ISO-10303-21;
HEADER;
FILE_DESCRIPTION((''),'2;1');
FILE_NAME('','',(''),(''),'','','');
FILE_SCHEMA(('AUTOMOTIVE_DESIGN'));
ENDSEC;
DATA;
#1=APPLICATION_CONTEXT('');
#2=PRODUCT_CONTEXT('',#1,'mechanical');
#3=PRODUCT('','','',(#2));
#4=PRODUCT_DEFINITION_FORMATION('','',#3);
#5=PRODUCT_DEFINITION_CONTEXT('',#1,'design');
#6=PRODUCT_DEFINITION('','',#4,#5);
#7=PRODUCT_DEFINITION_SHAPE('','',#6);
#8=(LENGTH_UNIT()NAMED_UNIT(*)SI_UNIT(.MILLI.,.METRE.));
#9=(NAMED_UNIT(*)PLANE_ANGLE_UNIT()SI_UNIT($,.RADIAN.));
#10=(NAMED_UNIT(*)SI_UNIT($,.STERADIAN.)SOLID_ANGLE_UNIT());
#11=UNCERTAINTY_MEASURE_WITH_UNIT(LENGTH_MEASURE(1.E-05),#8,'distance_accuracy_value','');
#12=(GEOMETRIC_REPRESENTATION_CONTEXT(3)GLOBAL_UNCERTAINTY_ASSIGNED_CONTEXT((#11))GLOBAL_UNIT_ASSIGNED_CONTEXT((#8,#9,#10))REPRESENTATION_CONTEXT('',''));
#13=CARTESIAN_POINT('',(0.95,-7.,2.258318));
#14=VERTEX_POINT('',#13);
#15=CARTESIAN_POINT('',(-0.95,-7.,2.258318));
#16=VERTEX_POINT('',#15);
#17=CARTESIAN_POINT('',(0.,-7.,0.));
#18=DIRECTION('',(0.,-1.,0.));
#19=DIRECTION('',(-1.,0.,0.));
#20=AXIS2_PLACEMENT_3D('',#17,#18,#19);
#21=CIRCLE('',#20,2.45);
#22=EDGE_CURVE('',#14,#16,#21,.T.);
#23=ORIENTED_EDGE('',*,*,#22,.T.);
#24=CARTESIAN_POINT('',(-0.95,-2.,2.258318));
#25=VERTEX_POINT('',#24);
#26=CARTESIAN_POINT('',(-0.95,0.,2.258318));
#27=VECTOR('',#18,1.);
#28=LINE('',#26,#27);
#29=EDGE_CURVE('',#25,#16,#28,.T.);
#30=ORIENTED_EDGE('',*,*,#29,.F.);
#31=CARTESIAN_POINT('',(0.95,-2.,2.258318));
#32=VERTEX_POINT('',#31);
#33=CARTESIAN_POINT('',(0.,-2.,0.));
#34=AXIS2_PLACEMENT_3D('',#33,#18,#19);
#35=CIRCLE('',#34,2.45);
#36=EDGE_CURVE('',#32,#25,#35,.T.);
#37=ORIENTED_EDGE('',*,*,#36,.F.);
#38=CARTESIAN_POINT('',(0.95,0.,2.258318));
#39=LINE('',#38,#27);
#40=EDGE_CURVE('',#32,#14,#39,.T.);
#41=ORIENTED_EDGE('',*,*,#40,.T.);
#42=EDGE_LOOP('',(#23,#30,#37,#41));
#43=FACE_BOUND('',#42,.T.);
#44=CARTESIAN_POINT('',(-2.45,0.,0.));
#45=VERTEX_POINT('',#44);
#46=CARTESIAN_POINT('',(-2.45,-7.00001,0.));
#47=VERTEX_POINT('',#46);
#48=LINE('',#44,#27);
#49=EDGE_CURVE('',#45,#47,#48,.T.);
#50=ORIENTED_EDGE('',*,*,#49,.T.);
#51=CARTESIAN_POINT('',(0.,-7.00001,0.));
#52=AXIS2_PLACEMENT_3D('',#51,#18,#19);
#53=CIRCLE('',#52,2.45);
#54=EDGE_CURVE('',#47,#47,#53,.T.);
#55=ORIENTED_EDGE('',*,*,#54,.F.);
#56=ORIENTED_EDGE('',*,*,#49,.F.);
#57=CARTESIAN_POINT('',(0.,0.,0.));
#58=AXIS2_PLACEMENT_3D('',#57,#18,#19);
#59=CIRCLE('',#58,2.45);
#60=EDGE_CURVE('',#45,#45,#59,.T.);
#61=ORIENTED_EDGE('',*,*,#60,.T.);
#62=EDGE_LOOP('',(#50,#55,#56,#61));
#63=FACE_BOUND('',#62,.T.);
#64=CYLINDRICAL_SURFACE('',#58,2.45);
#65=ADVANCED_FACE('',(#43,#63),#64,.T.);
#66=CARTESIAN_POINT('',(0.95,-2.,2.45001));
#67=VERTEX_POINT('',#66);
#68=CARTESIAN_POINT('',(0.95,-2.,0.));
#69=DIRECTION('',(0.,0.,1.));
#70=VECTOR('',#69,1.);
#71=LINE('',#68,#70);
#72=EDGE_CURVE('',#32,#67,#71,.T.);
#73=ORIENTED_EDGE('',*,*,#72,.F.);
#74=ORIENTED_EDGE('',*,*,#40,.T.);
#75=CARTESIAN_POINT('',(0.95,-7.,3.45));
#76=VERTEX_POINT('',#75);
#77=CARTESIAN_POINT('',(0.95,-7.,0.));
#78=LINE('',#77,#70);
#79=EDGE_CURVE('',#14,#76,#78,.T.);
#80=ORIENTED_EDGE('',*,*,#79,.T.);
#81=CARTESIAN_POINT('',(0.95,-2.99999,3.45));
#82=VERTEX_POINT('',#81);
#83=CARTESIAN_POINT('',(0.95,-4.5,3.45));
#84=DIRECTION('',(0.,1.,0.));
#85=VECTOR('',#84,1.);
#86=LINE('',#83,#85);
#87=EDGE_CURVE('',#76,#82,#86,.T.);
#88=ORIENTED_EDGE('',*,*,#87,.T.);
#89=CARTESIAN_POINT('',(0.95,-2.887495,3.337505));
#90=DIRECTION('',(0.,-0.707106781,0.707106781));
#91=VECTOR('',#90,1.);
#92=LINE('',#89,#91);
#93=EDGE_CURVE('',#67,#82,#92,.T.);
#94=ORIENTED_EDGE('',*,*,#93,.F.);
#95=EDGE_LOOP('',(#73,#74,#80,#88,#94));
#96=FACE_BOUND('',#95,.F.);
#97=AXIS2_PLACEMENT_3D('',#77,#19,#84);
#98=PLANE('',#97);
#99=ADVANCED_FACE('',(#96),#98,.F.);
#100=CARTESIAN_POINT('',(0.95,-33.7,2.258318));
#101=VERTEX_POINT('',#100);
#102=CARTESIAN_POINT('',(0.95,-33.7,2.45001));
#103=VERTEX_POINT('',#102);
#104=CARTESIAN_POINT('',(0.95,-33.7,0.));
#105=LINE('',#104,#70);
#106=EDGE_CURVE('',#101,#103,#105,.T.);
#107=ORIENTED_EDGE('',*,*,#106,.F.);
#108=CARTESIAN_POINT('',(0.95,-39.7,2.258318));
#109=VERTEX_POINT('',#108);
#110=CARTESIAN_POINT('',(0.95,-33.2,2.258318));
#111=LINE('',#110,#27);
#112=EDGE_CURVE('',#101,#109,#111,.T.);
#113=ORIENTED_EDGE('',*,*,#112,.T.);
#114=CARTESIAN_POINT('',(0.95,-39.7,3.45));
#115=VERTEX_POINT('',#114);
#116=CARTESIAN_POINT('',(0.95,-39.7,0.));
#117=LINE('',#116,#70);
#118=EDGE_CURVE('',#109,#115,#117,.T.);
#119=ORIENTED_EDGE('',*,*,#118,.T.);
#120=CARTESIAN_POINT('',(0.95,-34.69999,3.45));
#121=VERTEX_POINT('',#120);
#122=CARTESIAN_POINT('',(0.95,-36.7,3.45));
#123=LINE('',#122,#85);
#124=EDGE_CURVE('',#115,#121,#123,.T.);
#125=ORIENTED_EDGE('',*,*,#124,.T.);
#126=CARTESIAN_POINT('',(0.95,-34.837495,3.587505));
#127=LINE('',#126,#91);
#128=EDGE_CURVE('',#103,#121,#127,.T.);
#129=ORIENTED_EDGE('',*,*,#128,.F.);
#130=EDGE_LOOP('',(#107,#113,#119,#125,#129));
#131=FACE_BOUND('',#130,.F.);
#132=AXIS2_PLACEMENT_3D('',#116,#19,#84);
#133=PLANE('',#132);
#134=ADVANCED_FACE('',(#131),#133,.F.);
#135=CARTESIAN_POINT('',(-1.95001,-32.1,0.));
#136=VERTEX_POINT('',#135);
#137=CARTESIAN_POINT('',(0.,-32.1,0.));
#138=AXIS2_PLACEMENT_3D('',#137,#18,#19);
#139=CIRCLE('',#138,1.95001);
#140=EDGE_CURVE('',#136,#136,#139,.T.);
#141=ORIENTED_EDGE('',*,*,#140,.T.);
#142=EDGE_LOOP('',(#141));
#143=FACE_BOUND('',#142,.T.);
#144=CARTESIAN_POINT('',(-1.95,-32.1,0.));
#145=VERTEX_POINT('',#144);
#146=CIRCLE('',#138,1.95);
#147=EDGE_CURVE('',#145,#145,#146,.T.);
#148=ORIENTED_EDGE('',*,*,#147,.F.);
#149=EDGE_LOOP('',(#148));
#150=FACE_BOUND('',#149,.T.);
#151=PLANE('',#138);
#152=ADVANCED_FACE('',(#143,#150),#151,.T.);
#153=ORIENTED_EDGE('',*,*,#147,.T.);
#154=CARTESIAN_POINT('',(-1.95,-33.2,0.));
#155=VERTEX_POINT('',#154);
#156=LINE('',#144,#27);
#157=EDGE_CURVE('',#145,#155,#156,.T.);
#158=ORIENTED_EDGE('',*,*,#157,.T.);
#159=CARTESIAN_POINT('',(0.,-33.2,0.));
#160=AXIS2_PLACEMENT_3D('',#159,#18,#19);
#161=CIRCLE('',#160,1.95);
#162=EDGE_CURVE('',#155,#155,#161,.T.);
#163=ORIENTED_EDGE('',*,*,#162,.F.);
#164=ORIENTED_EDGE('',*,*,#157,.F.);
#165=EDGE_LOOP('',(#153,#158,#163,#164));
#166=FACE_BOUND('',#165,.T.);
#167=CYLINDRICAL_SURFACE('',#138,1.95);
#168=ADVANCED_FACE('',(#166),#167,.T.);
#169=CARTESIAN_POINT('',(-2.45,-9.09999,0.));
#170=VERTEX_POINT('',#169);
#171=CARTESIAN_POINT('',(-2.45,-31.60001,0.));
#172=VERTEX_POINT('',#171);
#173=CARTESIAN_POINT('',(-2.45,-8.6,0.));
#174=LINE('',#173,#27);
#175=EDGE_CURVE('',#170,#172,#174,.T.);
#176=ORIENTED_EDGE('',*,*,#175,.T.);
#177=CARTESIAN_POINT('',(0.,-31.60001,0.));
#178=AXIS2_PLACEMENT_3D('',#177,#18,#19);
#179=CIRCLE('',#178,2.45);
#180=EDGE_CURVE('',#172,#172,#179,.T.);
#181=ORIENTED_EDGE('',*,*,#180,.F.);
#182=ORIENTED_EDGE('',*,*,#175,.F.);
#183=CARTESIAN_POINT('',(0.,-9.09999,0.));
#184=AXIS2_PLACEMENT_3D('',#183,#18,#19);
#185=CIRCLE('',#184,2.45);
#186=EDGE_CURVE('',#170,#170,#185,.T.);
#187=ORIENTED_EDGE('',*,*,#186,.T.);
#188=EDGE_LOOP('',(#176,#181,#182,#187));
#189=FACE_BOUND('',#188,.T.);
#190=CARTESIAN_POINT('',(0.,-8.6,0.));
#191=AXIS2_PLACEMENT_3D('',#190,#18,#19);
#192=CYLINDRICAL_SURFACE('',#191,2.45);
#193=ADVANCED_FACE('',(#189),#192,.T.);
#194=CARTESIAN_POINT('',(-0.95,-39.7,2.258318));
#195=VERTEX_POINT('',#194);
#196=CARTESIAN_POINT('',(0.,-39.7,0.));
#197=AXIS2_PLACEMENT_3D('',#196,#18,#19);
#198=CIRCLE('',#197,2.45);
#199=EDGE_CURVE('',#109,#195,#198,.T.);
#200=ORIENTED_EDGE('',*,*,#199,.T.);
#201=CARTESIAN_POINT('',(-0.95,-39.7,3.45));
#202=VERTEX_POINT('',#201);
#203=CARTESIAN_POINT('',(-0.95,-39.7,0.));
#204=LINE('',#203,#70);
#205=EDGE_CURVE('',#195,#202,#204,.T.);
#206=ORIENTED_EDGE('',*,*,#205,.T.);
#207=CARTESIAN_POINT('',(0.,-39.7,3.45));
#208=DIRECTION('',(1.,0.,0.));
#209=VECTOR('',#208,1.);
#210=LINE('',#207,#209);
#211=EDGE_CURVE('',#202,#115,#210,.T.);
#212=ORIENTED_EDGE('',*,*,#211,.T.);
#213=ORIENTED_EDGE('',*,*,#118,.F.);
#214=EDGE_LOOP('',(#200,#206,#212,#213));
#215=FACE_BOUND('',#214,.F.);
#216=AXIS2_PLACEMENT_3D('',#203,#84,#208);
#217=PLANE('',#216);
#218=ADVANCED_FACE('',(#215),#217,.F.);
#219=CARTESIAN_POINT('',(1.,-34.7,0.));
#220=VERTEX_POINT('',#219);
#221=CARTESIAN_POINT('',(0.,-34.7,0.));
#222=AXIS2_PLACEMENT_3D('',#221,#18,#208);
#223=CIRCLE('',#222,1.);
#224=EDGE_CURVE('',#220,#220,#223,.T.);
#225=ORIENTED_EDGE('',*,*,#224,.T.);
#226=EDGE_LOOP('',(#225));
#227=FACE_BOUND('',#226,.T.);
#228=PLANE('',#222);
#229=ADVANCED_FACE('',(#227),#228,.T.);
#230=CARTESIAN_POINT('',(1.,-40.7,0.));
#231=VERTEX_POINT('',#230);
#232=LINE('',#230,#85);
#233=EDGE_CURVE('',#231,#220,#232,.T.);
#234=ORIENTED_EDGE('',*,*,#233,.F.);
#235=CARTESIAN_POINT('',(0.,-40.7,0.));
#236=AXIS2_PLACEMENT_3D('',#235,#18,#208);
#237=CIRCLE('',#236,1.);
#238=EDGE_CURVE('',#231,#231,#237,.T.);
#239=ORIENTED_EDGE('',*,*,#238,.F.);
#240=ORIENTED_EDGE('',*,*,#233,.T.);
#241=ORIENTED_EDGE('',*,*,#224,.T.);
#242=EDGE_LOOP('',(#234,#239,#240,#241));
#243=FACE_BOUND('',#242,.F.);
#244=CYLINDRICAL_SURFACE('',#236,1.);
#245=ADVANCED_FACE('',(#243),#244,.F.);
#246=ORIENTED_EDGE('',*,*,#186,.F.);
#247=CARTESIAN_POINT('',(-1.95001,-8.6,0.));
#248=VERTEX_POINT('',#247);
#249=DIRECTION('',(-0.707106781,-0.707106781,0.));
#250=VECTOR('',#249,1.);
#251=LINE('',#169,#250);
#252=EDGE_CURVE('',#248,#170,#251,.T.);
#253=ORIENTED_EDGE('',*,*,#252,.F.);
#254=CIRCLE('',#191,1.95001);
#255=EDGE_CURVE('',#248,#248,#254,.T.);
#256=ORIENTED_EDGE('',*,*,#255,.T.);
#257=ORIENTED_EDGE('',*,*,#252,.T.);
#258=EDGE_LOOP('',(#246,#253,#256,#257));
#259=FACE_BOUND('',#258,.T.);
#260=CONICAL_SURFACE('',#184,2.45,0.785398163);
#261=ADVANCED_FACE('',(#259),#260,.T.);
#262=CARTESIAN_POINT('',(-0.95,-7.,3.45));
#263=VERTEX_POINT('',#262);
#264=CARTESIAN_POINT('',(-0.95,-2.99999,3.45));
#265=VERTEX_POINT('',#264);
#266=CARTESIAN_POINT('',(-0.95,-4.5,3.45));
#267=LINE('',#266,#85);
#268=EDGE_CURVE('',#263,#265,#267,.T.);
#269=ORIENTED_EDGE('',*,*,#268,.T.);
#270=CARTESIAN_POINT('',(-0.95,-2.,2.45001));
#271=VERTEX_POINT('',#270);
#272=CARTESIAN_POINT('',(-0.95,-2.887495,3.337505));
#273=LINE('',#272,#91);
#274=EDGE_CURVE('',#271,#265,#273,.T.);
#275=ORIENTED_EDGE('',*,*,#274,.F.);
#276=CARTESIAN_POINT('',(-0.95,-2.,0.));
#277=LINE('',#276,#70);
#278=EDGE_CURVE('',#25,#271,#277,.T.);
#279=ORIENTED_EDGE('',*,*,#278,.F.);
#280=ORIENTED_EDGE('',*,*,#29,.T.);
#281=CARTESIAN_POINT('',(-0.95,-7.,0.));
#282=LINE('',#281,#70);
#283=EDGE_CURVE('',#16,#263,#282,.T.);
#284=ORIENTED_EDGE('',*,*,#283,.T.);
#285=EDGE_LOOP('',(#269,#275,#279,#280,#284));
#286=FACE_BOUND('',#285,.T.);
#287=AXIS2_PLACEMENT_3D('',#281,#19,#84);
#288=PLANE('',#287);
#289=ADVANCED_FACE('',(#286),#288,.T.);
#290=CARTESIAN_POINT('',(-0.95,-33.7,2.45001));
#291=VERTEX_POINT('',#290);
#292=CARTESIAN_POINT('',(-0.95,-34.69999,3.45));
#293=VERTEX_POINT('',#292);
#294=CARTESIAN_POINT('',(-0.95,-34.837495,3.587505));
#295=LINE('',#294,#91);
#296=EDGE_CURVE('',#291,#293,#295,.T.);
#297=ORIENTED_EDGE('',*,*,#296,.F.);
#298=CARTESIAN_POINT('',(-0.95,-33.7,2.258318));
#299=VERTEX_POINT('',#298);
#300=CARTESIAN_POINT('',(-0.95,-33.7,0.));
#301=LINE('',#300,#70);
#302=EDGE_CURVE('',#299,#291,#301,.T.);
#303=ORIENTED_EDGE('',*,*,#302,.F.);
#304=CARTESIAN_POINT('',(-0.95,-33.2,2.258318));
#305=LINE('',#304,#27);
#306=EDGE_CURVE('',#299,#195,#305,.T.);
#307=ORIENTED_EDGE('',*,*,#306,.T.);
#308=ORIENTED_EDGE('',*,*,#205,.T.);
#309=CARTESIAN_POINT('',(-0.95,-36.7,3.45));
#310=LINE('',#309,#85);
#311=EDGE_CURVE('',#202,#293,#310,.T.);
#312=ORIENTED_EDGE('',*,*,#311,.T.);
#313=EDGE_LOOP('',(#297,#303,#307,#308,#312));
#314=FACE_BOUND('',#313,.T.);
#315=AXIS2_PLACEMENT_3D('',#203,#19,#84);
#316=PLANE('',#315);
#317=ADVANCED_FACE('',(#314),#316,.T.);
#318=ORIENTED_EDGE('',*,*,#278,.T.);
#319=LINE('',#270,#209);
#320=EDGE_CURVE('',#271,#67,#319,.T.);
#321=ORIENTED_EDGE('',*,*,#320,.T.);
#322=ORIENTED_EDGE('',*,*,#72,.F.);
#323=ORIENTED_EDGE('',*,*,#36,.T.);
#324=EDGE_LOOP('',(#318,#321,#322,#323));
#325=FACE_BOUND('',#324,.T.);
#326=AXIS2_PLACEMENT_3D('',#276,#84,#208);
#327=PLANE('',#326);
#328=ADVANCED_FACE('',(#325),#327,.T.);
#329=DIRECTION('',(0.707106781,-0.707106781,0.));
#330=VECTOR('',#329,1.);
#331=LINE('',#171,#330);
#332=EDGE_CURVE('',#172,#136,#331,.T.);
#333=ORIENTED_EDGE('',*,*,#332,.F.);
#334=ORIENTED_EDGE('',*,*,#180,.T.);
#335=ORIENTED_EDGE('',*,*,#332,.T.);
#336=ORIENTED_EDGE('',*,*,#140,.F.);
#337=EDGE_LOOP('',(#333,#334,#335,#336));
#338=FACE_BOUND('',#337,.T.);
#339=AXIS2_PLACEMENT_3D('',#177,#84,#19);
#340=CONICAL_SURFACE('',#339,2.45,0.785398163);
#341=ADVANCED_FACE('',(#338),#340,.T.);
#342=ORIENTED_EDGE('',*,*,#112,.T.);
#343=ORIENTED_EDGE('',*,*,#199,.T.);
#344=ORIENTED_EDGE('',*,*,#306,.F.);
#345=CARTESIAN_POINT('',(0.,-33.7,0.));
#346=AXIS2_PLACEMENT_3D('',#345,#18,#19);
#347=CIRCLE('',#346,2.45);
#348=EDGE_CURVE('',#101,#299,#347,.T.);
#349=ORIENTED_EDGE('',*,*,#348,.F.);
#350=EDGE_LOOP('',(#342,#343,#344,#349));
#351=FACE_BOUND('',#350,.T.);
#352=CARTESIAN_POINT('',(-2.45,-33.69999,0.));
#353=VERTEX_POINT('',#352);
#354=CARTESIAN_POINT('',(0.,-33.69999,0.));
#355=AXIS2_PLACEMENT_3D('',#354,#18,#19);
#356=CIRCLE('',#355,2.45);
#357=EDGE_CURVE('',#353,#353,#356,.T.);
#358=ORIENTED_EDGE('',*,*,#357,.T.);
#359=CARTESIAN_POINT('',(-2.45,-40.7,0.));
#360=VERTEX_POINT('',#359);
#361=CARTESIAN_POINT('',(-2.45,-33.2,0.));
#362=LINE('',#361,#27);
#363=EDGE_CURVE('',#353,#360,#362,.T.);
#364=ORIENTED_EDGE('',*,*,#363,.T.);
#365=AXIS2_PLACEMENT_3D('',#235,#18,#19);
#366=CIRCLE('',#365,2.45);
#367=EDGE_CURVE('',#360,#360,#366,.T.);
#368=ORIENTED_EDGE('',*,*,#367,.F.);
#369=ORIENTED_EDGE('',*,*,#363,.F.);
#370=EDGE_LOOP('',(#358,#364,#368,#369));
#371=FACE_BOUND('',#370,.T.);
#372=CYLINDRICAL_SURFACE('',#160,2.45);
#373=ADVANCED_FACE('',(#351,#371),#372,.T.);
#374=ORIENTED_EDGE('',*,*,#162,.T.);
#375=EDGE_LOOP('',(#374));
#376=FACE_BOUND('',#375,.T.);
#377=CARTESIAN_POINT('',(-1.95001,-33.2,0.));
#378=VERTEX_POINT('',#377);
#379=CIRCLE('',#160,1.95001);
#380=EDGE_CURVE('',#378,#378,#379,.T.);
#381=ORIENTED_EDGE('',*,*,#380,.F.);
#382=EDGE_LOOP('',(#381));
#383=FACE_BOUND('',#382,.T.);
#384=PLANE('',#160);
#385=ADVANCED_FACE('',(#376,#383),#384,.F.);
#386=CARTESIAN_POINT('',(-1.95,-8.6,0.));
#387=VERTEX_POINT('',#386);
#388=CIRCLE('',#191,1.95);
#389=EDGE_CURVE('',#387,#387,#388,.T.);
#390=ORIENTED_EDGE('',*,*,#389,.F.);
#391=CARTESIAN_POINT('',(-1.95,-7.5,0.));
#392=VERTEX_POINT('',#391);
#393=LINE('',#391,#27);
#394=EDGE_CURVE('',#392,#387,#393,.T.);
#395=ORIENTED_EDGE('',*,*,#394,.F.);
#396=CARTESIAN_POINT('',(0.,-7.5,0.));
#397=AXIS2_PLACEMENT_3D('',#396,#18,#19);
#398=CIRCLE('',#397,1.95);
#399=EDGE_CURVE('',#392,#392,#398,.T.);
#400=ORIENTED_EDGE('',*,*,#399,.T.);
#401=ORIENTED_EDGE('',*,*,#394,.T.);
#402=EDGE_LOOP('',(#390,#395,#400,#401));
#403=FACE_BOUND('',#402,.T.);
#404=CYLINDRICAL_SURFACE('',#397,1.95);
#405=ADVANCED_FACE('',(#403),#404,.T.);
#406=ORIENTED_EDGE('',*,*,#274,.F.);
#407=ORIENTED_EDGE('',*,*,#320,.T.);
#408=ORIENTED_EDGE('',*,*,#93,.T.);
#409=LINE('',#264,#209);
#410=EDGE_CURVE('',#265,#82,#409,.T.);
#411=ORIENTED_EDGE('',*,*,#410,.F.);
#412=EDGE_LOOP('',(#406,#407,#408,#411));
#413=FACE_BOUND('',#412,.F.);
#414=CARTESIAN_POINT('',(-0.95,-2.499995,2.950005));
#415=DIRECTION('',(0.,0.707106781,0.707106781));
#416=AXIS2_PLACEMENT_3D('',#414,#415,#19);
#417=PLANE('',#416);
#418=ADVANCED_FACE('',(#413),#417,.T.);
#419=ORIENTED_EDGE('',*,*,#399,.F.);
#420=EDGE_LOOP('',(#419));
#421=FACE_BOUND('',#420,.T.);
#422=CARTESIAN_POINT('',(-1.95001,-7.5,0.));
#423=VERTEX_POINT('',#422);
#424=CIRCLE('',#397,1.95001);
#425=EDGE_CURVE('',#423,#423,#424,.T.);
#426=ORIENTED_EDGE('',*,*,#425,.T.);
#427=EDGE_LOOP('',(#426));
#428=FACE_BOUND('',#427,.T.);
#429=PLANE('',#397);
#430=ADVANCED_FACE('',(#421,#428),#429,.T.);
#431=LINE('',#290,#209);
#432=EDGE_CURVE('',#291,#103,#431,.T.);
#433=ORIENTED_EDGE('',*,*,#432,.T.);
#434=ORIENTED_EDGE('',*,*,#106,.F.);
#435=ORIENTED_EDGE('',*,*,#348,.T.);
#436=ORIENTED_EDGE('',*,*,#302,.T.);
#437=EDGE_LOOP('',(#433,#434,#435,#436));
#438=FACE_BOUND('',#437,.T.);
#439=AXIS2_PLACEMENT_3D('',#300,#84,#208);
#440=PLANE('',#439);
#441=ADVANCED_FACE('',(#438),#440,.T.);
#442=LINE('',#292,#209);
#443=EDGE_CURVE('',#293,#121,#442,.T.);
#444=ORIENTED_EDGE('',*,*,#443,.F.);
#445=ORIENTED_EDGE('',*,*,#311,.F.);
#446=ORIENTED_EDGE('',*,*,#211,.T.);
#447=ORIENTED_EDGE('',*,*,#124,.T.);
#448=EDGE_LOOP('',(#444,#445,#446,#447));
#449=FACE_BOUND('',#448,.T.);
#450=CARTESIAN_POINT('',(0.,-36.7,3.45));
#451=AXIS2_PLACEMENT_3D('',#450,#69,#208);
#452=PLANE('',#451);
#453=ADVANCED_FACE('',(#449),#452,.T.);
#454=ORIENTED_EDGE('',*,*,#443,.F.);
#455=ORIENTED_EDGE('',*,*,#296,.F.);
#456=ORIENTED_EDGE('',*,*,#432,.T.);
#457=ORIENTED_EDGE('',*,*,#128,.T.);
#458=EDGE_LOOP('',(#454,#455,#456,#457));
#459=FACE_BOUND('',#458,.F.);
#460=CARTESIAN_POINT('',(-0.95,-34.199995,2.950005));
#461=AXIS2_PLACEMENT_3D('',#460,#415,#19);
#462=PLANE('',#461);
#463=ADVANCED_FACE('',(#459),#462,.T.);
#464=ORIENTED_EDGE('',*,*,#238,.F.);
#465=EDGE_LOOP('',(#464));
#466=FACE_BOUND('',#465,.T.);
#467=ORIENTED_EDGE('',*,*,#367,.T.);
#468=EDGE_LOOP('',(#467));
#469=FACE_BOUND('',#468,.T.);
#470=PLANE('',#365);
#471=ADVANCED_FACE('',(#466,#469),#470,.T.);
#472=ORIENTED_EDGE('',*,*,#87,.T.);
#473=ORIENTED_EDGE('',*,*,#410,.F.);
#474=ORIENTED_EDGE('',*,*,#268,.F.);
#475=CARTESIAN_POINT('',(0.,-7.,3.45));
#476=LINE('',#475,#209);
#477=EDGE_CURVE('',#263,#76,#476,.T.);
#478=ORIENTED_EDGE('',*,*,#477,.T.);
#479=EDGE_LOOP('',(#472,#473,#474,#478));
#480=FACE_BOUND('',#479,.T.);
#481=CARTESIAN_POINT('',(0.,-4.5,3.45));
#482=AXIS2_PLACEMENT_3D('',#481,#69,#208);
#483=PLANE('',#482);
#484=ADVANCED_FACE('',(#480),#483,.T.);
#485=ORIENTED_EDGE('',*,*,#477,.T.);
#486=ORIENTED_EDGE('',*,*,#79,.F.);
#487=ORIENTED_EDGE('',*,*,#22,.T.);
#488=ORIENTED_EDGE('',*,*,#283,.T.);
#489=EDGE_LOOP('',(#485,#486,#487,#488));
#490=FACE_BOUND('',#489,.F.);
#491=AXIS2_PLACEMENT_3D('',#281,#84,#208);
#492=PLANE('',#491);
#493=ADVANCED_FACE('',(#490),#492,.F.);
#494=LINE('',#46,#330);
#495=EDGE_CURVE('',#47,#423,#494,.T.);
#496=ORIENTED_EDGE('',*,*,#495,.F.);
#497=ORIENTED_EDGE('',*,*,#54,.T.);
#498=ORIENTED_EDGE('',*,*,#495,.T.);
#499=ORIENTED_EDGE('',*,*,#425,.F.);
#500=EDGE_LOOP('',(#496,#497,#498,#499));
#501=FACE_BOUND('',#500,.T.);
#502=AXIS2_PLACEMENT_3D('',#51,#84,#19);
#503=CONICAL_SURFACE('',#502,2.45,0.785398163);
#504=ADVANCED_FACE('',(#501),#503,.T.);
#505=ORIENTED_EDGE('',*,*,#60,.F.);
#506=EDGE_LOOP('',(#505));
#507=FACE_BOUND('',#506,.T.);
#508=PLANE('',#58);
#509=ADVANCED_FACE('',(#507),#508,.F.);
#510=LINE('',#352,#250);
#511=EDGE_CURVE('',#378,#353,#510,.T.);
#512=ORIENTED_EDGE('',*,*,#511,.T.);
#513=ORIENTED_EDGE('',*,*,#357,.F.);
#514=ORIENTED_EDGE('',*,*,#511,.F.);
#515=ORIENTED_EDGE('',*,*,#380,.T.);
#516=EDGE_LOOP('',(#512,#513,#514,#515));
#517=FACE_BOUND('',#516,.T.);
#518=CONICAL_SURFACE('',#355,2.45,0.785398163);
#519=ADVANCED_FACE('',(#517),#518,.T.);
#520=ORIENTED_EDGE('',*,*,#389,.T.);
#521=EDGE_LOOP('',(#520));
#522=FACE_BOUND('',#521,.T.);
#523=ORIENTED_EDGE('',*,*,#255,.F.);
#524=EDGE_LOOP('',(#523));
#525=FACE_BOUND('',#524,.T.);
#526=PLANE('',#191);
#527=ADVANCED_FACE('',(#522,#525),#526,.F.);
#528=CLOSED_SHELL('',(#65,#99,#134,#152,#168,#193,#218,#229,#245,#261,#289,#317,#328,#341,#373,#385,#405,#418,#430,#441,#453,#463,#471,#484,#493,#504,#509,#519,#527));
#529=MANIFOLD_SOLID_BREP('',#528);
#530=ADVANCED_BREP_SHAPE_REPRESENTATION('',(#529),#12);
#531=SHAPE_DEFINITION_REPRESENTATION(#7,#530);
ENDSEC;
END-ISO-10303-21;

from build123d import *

# Parameters (mm, degrees)
F3_SIZE  = 0.49999
F1_W     = 1.9
F1_H     = 5
F1_H_2   = 6
F4_DEPTH = 3.45
F5_SIZE  = 0.99999
F6_R     = 1
F7_DEPTH = 6


# Not quite as in the source:
# - a fillet or chamfer is up to 0.001 mm smaller than in the source, because OpenCascade refuses the exact size


with BuildPart() as f2:
    # F0 (on Top) → F2 (revolve)
    with BuildSketch(Plane.XY):
        Polygon((0, -40.7), (0, 0), (-2.45, 0), (-2.45, -7.5), (-1.95, -7.5), (-1.95, -8.6), (-2.45, -8.6), (-2.45, -32.1), (-1.95, -32.1), (-1.95, -33.2), (-2.45, -33.2), (-2.45, -40.7), align=None)
    revolve(axis=Axis((0, -15.1539987261, 0), (0, -1, 0)))

    # F3 (size 0.5 in the source; OpenCascade refuses exactly that, so slightly less here)
    f3_edges = [f2.edges().sort_by_distance(p)[0] for p in [
        (2.45, -8.6, 0),
        (2.45, -33.2, 0),
        (2.45, -7.5, 0),
        (2.45, -32.1, 0),
    ]]
    chamfer(f3_edges, length=F3_SIZE)

    # F1 (on Top) → F4 (join)
    with BuildSketch(Plane.XY):
        with Locations((0, -4.5)):
            Rectangle(F1_W, F1_H)
        with Locations((0, -36.7)):
            Rectangle(F1_W, F1_H_2)
    extrude(amount=F4_DEPTH)

    # F5 (size 1 in the source; OpenCascade refuses exactly that, so slightly less here)
    f5_edges = [f2.edges().sort_by_distance(p)[0] for p in [
        (0, -33.7, 3.45),
        (0, -2, 3.45),
    ]]
    chamfer(f5_edges, length=F5_SIZE)

    # F6 (on face) → F7 (cut)
    with BuildSketch(Plane.XZ.offset(40.7)):
        Circle(F6_R)
    extrude(amount=-F7_DEPTH, mode=Mode.SUBTRACT)


solid = f2.part
